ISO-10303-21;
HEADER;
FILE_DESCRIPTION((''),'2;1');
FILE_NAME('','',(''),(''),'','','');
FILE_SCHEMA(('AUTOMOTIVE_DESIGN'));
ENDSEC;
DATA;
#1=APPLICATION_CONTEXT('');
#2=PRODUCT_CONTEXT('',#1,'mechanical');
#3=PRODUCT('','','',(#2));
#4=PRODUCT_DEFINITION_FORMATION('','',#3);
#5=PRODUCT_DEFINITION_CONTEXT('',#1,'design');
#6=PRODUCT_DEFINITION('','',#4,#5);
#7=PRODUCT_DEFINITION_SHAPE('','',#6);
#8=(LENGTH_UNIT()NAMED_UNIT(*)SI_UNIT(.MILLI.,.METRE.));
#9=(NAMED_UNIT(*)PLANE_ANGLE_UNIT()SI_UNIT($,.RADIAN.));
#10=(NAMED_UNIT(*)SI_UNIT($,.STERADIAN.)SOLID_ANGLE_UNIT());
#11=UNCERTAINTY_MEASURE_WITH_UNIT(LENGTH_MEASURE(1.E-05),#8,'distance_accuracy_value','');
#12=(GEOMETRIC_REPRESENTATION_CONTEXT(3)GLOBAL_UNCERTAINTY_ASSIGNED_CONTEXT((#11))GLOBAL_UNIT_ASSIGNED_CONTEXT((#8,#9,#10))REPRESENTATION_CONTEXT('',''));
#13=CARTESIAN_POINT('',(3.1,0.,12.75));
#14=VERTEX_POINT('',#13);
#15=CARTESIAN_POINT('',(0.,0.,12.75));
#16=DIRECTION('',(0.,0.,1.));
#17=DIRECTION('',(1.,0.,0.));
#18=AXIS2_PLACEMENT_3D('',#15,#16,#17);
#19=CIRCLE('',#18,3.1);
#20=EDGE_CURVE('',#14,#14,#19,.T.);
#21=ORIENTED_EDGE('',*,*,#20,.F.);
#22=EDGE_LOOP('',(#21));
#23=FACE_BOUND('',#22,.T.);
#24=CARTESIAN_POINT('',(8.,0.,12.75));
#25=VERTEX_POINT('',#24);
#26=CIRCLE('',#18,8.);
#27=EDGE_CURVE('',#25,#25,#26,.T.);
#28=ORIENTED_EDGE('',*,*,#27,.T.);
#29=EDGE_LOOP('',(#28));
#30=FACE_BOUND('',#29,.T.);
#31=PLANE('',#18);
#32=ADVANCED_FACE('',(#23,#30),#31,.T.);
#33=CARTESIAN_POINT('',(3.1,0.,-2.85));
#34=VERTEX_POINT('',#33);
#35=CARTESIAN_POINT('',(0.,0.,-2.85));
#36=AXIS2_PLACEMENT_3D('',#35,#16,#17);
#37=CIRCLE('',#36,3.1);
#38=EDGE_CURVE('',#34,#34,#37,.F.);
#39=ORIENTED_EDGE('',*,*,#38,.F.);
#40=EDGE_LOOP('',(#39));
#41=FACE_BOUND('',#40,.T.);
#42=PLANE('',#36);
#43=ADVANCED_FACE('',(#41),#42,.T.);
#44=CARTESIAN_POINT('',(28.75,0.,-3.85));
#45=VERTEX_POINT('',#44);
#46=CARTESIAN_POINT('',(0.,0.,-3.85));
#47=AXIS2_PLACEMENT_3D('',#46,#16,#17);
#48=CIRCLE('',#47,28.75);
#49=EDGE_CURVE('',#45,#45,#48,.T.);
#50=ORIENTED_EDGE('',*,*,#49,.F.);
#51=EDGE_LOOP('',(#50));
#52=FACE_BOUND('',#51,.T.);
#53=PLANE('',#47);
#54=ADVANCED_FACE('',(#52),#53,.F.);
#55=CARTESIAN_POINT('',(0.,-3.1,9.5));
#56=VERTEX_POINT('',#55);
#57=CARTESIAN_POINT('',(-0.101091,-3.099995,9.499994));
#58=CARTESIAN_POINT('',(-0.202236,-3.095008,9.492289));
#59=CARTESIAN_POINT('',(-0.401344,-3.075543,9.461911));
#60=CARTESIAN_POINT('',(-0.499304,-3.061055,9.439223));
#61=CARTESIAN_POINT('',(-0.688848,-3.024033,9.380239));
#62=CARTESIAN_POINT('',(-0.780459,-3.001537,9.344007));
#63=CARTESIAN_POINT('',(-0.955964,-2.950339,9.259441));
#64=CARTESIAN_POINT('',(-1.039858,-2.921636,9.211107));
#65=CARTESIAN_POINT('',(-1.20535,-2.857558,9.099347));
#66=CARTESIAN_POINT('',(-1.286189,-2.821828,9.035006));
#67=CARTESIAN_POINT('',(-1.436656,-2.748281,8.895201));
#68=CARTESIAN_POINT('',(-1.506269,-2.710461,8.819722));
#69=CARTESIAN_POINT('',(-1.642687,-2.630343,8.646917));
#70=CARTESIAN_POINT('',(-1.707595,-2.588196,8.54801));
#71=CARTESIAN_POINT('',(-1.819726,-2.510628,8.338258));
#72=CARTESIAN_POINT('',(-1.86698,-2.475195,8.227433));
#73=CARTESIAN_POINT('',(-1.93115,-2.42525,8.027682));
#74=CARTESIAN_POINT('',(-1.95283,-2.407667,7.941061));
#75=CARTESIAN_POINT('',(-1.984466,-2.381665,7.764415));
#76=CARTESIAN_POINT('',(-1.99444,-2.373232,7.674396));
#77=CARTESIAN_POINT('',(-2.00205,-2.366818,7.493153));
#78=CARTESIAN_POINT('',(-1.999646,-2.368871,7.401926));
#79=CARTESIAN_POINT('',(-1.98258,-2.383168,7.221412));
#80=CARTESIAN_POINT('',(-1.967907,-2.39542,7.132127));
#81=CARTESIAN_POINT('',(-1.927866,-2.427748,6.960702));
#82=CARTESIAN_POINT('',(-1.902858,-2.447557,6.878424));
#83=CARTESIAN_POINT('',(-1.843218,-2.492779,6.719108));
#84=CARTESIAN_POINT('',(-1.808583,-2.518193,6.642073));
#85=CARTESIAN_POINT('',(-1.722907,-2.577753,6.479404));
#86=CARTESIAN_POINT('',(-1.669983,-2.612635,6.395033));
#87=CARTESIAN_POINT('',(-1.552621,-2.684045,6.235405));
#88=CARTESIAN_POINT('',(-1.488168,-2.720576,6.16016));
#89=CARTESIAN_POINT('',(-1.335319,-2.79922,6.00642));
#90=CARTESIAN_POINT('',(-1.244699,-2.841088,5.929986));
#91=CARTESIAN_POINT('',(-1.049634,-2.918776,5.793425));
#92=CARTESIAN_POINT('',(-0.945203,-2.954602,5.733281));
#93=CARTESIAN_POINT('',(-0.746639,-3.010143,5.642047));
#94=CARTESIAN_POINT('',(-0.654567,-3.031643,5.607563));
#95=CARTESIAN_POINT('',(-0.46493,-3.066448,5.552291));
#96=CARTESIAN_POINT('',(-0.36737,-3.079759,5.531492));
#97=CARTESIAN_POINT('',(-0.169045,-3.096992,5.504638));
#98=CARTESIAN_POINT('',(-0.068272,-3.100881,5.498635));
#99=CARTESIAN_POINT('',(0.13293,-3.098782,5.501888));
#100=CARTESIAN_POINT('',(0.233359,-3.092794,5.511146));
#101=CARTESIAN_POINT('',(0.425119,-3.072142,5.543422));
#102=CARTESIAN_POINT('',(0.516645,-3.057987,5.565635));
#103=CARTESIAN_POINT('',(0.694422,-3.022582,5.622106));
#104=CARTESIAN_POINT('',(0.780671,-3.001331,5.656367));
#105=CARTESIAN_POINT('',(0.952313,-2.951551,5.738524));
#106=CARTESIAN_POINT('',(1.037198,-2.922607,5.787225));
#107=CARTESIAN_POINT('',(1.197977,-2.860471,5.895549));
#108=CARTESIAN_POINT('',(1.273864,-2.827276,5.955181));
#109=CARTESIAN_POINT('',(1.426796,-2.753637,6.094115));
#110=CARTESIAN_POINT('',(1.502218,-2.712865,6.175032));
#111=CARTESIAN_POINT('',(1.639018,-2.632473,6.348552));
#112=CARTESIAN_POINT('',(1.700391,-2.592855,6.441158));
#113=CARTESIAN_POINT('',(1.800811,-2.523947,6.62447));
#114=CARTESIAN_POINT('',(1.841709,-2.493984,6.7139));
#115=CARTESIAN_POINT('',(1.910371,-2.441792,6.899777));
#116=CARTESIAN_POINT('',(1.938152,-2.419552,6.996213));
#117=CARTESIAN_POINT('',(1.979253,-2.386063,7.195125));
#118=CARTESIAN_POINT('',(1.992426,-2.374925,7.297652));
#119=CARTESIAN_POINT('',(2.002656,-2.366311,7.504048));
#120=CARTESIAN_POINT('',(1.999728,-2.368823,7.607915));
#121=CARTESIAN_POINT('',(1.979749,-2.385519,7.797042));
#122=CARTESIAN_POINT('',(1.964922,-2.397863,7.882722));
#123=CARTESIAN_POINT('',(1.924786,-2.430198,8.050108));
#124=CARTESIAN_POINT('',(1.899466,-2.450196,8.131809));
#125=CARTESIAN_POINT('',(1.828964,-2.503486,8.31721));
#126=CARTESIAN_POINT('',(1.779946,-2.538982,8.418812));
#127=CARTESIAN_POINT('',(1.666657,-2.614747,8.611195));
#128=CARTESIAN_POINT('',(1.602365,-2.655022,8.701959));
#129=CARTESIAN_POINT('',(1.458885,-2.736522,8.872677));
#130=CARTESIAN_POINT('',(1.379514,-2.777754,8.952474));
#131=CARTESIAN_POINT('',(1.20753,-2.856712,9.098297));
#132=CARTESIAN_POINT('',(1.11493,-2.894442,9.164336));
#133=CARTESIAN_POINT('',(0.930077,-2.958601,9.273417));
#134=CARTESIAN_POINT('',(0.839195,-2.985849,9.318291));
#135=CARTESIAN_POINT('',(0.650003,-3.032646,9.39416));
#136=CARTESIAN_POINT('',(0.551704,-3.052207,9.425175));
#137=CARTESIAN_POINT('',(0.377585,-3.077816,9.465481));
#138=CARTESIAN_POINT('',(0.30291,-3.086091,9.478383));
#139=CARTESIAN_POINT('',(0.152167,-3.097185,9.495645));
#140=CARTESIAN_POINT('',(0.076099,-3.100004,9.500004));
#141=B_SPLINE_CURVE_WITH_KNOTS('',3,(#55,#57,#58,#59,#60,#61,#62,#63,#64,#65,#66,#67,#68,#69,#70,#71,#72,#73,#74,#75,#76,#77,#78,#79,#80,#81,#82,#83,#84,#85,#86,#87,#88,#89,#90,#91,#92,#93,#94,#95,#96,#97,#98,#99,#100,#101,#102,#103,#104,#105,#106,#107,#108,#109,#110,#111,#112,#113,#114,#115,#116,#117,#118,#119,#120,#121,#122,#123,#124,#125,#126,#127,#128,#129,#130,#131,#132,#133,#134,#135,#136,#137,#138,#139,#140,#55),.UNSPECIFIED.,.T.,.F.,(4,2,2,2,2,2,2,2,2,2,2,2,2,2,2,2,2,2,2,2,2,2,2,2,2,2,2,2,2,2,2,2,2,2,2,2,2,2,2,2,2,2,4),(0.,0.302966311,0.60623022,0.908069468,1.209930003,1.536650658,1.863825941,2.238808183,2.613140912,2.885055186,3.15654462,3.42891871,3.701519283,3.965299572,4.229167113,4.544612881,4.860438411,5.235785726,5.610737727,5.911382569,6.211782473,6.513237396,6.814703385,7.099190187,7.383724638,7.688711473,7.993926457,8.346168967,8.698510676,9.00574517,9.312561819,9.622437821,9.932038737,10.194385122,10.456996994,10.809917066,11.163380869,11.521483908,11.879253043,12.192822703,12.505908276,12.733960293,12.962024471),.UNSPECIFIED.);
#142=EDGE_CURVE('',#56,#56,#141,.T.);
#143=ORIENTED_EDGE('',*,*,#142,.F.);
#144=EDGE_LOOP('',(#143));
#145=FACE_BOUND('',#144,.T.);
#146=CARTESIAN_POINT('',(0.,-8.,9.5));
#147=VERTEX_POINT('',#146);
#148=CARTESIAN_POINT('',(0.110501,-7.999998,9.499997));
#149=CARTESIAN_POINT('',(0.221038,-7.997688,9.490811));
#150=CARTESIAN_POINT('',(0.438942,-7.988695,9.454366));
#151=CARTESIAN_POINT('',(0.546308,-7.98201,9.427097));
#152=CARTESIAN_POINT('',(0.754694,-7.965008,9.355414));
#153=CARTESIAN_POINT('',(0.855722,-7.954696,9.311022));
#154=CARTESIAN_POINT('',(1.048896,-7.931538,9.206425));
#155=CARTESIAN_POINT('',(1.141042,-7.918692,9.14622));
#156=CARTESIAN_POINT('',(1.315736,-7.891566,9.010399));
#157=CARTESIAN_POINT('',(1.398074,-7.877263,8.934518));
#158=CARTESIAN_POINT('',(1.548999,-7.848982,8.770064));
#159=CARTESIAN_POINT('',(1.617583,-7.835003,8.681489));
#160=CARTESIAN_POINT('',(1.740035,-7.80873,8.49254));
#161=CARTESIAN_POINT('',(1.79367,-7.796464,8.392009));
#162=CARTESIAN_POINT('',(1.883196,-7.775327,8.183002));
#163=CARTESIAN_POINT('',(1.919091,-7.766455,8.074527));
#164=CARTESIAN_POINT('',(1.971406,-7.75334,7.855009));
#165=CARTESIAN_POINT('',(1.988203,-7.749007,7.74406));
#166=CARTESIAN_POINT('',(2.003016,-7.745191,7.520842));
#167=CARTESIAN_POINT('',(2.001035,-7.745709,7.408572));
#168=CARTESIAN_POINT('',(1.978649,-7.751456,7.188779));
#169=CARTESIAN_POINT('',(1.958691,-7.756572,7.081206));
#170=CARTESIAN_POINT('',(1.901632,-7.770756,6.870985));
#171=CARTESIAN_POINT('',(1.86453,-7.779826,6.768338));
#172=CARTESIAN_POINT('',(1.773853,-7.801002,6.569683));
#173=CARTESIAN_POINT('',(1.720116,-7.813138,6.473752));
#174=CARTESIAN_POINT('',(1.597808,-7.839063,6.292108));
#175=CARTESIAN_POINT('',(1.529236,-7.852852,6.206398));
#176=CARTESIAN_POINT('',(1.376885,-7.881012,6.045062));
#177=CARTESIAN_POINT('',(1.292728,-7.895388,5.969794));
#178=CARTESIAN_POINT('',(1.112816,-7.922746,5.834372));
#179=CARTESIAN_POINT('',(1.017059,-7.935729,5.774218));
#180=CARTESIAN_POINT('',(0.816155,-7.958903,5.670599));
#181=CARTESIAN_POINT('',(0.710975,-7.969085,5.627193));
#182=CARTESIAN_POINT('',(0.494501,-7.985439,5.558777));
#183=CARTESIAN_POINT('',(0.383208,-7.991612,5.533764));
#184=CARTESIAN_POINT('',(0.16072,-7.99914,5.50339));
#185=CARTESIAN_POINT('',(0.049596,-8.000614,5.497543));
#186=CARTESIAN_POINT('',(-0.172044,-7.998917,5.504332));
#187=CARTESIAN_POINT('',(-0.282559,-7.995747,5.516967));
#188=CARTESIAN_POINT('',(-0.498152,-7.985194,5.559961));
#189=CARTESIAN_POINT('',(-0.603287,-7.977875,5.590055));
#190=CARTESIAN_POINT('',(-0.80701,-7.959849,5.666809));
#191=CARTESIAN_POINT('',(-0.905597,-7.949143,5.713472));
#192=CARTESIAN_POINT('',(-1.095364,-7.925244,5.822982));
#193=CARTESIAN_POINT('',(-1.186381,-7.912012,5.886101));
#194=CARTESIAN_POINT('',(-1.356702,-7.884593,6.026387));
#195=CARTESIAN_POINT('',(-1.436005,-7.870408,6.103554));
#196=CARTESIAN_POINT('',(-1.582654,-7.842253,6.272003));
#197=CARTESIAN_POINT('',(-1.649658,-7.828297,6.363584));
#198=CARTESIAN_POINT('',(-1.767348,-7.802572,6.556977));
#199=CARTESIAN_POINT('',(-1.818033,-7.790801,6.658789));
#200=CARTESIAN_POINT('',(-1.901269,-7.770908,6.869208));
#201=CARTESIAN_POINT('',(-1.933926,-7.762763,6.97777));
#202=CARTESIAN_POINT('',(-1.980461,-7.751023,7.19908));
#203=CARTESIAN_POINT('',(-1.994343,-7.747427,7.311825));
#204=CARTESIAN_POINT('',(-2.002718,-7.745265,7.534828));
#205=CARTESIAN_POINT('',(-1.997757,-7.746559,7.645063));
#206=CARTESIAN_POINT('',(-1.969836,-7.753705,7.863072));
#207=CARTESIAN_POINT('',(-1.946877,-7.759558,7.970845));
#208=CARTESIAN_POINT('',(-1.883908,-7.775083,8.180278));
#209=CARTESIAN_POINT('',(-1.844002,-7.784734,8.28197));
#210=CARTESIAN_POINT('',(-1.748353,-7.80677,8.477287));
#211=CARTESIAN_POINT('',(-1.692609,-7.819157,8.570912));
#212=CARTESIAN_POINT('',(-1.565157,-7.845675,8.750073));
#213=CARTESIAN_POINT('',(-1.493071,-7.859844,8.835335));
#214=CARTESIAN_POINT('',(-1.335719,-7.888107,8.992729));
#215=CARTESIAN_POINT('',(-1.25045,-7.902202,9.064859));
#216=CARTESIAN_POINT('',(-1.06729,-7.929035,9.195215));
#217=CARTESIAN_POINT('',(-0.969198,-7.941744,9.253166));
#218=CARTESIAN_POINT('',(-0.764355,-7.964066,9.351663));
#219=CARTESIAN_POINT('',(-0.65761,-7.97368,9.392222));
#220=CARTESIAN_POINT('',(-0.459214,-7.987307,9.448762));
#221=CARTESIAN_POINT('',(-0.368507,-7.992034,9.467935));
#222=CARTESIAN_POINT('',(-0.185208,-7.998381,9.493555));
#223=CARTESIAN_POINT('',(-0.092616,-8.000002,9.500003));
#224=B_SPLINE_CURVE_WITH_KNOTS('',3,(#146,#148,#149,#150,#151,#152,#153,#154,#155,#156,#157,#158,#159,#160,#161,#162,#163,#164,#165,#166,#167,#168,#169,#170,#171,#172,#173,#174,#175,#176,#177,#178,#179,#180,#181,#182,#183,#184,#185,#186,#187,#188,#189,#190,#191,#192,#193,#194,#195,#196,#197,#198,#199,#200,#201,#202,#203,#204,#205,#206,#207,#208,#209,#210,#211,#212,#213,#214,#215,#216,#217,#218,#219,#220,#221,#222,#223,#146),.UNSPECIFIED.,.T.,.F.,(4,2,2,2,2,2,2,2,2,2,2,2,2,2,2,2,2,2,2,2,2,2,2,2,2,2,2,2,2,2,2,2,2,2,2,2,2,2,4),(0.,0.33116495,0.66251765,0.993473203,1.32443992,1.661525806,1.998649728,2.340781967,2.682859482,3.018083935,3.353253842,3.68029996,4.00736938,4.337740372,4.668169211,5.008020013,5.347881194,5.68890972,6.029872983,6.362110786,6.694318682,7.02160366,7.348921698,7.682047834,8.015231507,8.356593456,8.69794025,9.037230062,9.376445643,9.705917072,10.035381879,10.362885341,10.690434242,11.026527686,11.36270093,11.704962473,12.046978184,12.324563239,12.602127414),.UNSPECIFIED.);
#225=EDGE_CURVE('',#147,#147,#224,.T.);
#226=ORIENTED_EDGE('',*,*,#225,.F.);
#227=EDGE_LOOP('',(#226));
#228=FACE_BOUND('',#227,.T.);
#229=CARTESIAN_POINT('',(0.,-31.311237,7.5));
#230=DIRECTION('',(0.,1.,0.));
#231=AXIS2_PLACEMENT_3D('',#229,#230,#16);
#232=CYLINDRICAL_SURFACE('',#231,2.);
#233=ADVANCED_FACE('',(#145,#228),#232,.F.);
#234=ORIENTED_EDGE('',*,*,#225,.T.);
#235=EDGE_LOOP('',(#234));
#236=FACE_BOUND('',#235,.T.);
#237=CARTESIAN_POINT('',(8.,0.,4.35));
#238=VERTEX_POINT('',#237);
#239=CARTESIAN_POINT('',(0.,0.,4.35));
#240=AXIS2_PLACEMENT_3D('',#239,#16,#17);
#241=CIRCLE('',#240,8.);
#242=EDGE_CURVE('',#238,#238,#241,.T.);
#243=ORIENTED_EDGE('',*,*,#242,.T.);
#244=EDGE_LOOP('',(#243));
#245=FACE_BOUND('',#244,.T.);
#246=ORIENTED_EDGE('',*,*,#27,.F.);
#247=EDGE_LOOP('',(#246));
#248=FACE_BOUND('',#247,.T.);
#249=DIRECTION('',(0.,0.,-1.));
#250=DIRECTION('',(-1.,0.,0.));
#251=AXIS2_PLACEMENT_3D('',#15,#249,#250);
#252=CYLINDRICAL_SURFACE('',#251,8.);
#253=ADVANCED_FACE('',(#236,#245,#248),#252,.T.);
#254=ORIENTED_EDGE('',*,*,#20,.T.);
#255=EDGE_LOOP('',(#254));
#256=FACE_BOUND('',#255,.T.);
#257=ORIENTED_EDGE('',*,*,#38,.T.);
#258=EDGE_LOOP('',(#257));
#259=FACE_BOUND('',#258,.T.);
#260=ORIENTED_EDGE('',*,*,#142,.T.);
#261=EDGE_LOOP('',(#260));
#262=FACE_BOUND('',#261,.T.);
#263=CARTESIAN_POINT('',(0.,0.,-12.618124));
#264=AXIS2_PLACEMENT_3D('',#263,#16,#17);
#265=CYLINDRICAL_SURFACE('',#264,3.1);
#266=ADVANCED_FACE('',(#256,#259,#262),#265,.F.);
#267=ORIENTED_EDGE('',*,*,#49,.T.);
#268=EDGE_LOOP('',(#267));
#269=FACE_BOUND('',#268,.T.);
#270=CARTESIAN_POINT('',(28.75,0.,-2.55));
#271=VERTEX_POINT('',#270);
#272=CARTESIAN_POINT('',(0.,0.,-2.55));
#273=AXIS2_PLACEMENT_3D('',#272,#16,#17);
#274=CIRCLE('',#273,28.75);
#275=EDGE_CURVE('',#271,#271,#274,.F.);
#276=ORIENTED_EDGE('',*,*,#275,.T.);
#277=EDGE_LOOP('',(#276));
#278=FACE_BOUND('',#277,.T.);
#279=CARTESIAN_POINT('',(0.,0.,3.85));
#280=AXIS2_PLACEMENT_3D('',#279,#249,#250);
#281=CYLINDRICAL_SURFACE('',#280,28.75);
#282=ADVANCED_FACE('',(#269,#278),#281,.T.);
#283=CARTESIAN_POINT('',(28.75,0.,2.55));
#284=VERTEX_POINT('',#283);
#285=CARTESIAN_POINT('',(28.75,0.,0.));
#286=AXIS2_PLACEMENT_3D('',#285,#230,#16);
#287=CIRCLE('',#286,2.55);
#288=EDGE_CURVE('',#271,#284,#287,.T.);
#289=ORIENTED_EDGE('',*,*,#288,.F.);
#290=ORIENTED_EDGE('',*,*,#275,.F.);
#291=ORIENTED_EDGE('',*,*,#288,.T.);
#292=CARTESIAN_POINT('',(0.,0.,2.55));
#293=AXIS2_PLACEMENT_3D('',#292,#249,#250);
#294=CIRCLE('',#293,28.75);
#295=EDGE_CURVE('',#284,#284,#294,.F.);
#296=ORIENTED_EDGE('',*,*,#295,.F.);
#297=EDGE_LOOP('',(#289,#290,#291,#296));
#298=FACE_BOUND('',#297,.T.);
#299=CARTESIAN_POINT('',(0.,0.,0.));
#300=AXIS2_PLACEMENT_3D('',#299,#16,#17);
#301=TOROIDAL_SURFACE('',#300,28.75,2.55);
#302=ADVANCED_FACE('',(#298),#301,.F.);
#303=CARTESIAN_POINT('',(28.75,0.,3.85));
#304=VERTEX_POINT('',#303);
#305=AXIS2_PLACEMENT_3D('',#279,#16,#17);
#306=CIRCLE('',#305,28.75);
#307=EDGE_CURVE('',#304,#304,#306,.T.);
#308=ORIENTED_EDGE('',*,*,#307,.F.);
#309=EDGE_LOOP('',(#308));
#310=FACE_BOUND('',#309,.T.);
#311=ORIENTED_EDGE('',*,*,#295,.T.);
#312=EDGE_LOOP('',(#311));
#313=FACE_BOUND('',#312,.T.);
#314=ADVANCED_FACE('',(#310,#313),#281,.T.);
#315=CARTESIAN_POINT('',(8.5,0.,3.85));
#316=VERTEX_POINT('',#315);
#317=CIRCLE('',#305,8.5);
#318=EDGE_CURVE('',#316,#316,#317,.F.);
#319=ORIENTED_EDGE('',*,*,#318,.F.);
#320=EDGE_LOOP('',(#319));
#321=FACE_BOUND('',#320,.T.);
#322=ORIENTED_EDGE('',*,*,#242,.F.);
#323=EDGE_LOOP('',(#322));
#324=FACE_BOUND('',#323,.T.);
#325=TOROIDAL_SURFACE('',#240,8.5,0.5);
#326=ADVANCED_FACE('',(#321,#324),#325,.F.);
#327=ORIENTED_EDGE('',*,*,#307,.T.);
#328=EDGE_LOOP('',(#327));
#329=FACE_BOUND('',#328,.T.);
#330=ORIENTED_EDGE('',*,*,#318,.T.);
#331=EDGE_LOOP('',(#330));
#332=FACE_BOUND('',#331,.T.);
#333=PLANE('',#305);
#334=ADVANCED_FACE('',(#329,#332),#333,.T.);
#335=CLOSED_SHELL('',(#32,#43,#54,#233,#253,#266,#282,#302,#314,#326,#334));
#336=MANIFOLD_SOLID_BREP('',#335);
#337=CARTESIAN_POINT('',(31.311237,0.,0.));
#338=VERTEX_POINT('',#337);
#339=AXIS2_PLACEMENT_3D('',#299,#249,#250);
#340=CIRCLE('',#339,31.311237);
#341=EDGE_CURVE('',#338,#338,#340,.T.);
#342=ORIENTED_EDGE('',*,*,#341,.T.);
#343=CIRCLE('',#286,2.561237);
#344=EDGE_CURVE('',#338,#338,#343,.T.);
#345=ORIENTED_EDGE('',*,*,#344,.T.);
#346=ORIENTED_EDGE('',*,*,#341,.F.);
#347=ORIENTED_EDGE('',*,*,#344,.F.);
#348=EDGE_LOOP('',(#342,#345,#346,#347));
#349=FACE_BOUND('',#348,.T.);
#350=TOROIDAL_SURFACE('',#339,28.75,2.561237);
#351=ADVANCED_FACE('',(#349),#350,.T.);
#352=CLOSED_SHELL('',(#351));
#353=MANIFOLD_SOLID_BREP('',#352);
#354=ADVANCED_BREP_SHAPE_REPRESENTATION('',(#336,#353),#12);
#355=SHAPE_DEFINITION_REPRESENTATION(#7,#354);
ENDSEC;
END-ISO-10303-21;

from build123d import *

# Parameters (mm, degrees)
SKETCH1_R           = 28.75
BOSS_EXTRUDE1_DEPTH = 3.85
SKETCH2_R           = 2.55
SWEEP1_OUTLINE_R    = 2.561236926
SKETCH4_R           = 8
BOSS_EXTRUDE2_DEPTH = 8.9
SKETCH5_R           = 3.1
CUT_EXTRUDE1_DEPTH  = 15.6
SKETCH6_R           = 2
CUT_EXTRUDE2_DEPTH  = 47.079818014
FILLET1_R           = 0.5


# Read off the part's stored shape, not the designer's step: Sweep1
with BuildPart() as part:
    # Sketch1 → Boss-Extrude1 (new, symmetric)
    with BuildSketch(Plane.XY):
        with Locations(Location((0, 0, 0), (0, 0, 180))):
            Circle(SKETCH1_R)
    extrude(amount=BOSS_EXTRUDE1_DEPTH, both=True)

    # Cut-Sweep1: sweep along a curve in space
    with BuildLine() as cut_sweep1_path:
        ThreePointArc((28.75, 0, -3.85), (20.329319959, 20.329319959, -3.85), (0, 28.75, -3.85))
        ThreePointArc((0, 28.75, -3.85), (-20.329319959, 20.329319959, -3.85), (-28.75, 0, -3.85))
        ThreePointArc((-28.75, 0, -3.85), (-20.329319959, -20.329319959, -3.85), (0, -28.75, -3.85))
        ThreePointArc((0, -28.75, -3.85), (20.329319959, -20.329319959, -3.85), (28.75, 0, -3.85))
    # Sketch2 → Cut-Sweep1 (sweep, cut)
    with BuildSketch(Plane(origin=(0, 0, 0), x_dir=(1, 0, 0), z_dir=(0, 1, 0))):
        with Locations((28.75, 0)):
            Circle(SKETCH2_R)
    sweep(path=cut_sweep1_path.line, mode=Mode.SUBTRACT)

    # Sketch4 → Boss-Extrude2 (add)
    with BuildSketch(Plane.XY.offset(3.85)):
        Circle(SKETCH4_R)
    extrude(amount=BOSS_EXTRUDE2_DEPTH)

    # Sketch5 → Cut-Extrude1 (cut)
    with BuildSketch(Plane.XY.offset(12.75)):
        Circle(SKETCH5_R)
    extrude(amount=-CUT_EXTRUDE1_DEPTH, mode=Mode.SUBTRACT)

    # Sketch6 → Cut-Extrude2 (cut, through all)
    with BuildSketch(Plane(origin=(0, 0, 0), x_dir=(1, 0, 0), z_dir=(0, 1, 0))):
        with Locations(Location((0, -7.5, 0), (0, 0, 270))):
            Circle(SKETCH6_R)
    extrude(amount=-CUT_EXTRUDE2_DEPTH, mode=Mode.SUBTRACT)

    # Fillet1
    fillet1_edges = [part.edges().sort_by_distance(p)[0] for p in [
        (-8, 0, 3.85),
    ]]
    fillet(fillet1_edges, radius=FILLET1_R)


with BuildPart() as body_2:
    # Sweep1 outline → Sweep1 (revolve)
    with BuildSketch(Plane.XZ):
        with Locations((28.75, 0)):
            Circle(SWEEP1_OUTLINE_R)
    revolve(axis=Axis((0, 0, 0), (0, 0, 1)))


solid = Compound([part.part, body_2.part])
